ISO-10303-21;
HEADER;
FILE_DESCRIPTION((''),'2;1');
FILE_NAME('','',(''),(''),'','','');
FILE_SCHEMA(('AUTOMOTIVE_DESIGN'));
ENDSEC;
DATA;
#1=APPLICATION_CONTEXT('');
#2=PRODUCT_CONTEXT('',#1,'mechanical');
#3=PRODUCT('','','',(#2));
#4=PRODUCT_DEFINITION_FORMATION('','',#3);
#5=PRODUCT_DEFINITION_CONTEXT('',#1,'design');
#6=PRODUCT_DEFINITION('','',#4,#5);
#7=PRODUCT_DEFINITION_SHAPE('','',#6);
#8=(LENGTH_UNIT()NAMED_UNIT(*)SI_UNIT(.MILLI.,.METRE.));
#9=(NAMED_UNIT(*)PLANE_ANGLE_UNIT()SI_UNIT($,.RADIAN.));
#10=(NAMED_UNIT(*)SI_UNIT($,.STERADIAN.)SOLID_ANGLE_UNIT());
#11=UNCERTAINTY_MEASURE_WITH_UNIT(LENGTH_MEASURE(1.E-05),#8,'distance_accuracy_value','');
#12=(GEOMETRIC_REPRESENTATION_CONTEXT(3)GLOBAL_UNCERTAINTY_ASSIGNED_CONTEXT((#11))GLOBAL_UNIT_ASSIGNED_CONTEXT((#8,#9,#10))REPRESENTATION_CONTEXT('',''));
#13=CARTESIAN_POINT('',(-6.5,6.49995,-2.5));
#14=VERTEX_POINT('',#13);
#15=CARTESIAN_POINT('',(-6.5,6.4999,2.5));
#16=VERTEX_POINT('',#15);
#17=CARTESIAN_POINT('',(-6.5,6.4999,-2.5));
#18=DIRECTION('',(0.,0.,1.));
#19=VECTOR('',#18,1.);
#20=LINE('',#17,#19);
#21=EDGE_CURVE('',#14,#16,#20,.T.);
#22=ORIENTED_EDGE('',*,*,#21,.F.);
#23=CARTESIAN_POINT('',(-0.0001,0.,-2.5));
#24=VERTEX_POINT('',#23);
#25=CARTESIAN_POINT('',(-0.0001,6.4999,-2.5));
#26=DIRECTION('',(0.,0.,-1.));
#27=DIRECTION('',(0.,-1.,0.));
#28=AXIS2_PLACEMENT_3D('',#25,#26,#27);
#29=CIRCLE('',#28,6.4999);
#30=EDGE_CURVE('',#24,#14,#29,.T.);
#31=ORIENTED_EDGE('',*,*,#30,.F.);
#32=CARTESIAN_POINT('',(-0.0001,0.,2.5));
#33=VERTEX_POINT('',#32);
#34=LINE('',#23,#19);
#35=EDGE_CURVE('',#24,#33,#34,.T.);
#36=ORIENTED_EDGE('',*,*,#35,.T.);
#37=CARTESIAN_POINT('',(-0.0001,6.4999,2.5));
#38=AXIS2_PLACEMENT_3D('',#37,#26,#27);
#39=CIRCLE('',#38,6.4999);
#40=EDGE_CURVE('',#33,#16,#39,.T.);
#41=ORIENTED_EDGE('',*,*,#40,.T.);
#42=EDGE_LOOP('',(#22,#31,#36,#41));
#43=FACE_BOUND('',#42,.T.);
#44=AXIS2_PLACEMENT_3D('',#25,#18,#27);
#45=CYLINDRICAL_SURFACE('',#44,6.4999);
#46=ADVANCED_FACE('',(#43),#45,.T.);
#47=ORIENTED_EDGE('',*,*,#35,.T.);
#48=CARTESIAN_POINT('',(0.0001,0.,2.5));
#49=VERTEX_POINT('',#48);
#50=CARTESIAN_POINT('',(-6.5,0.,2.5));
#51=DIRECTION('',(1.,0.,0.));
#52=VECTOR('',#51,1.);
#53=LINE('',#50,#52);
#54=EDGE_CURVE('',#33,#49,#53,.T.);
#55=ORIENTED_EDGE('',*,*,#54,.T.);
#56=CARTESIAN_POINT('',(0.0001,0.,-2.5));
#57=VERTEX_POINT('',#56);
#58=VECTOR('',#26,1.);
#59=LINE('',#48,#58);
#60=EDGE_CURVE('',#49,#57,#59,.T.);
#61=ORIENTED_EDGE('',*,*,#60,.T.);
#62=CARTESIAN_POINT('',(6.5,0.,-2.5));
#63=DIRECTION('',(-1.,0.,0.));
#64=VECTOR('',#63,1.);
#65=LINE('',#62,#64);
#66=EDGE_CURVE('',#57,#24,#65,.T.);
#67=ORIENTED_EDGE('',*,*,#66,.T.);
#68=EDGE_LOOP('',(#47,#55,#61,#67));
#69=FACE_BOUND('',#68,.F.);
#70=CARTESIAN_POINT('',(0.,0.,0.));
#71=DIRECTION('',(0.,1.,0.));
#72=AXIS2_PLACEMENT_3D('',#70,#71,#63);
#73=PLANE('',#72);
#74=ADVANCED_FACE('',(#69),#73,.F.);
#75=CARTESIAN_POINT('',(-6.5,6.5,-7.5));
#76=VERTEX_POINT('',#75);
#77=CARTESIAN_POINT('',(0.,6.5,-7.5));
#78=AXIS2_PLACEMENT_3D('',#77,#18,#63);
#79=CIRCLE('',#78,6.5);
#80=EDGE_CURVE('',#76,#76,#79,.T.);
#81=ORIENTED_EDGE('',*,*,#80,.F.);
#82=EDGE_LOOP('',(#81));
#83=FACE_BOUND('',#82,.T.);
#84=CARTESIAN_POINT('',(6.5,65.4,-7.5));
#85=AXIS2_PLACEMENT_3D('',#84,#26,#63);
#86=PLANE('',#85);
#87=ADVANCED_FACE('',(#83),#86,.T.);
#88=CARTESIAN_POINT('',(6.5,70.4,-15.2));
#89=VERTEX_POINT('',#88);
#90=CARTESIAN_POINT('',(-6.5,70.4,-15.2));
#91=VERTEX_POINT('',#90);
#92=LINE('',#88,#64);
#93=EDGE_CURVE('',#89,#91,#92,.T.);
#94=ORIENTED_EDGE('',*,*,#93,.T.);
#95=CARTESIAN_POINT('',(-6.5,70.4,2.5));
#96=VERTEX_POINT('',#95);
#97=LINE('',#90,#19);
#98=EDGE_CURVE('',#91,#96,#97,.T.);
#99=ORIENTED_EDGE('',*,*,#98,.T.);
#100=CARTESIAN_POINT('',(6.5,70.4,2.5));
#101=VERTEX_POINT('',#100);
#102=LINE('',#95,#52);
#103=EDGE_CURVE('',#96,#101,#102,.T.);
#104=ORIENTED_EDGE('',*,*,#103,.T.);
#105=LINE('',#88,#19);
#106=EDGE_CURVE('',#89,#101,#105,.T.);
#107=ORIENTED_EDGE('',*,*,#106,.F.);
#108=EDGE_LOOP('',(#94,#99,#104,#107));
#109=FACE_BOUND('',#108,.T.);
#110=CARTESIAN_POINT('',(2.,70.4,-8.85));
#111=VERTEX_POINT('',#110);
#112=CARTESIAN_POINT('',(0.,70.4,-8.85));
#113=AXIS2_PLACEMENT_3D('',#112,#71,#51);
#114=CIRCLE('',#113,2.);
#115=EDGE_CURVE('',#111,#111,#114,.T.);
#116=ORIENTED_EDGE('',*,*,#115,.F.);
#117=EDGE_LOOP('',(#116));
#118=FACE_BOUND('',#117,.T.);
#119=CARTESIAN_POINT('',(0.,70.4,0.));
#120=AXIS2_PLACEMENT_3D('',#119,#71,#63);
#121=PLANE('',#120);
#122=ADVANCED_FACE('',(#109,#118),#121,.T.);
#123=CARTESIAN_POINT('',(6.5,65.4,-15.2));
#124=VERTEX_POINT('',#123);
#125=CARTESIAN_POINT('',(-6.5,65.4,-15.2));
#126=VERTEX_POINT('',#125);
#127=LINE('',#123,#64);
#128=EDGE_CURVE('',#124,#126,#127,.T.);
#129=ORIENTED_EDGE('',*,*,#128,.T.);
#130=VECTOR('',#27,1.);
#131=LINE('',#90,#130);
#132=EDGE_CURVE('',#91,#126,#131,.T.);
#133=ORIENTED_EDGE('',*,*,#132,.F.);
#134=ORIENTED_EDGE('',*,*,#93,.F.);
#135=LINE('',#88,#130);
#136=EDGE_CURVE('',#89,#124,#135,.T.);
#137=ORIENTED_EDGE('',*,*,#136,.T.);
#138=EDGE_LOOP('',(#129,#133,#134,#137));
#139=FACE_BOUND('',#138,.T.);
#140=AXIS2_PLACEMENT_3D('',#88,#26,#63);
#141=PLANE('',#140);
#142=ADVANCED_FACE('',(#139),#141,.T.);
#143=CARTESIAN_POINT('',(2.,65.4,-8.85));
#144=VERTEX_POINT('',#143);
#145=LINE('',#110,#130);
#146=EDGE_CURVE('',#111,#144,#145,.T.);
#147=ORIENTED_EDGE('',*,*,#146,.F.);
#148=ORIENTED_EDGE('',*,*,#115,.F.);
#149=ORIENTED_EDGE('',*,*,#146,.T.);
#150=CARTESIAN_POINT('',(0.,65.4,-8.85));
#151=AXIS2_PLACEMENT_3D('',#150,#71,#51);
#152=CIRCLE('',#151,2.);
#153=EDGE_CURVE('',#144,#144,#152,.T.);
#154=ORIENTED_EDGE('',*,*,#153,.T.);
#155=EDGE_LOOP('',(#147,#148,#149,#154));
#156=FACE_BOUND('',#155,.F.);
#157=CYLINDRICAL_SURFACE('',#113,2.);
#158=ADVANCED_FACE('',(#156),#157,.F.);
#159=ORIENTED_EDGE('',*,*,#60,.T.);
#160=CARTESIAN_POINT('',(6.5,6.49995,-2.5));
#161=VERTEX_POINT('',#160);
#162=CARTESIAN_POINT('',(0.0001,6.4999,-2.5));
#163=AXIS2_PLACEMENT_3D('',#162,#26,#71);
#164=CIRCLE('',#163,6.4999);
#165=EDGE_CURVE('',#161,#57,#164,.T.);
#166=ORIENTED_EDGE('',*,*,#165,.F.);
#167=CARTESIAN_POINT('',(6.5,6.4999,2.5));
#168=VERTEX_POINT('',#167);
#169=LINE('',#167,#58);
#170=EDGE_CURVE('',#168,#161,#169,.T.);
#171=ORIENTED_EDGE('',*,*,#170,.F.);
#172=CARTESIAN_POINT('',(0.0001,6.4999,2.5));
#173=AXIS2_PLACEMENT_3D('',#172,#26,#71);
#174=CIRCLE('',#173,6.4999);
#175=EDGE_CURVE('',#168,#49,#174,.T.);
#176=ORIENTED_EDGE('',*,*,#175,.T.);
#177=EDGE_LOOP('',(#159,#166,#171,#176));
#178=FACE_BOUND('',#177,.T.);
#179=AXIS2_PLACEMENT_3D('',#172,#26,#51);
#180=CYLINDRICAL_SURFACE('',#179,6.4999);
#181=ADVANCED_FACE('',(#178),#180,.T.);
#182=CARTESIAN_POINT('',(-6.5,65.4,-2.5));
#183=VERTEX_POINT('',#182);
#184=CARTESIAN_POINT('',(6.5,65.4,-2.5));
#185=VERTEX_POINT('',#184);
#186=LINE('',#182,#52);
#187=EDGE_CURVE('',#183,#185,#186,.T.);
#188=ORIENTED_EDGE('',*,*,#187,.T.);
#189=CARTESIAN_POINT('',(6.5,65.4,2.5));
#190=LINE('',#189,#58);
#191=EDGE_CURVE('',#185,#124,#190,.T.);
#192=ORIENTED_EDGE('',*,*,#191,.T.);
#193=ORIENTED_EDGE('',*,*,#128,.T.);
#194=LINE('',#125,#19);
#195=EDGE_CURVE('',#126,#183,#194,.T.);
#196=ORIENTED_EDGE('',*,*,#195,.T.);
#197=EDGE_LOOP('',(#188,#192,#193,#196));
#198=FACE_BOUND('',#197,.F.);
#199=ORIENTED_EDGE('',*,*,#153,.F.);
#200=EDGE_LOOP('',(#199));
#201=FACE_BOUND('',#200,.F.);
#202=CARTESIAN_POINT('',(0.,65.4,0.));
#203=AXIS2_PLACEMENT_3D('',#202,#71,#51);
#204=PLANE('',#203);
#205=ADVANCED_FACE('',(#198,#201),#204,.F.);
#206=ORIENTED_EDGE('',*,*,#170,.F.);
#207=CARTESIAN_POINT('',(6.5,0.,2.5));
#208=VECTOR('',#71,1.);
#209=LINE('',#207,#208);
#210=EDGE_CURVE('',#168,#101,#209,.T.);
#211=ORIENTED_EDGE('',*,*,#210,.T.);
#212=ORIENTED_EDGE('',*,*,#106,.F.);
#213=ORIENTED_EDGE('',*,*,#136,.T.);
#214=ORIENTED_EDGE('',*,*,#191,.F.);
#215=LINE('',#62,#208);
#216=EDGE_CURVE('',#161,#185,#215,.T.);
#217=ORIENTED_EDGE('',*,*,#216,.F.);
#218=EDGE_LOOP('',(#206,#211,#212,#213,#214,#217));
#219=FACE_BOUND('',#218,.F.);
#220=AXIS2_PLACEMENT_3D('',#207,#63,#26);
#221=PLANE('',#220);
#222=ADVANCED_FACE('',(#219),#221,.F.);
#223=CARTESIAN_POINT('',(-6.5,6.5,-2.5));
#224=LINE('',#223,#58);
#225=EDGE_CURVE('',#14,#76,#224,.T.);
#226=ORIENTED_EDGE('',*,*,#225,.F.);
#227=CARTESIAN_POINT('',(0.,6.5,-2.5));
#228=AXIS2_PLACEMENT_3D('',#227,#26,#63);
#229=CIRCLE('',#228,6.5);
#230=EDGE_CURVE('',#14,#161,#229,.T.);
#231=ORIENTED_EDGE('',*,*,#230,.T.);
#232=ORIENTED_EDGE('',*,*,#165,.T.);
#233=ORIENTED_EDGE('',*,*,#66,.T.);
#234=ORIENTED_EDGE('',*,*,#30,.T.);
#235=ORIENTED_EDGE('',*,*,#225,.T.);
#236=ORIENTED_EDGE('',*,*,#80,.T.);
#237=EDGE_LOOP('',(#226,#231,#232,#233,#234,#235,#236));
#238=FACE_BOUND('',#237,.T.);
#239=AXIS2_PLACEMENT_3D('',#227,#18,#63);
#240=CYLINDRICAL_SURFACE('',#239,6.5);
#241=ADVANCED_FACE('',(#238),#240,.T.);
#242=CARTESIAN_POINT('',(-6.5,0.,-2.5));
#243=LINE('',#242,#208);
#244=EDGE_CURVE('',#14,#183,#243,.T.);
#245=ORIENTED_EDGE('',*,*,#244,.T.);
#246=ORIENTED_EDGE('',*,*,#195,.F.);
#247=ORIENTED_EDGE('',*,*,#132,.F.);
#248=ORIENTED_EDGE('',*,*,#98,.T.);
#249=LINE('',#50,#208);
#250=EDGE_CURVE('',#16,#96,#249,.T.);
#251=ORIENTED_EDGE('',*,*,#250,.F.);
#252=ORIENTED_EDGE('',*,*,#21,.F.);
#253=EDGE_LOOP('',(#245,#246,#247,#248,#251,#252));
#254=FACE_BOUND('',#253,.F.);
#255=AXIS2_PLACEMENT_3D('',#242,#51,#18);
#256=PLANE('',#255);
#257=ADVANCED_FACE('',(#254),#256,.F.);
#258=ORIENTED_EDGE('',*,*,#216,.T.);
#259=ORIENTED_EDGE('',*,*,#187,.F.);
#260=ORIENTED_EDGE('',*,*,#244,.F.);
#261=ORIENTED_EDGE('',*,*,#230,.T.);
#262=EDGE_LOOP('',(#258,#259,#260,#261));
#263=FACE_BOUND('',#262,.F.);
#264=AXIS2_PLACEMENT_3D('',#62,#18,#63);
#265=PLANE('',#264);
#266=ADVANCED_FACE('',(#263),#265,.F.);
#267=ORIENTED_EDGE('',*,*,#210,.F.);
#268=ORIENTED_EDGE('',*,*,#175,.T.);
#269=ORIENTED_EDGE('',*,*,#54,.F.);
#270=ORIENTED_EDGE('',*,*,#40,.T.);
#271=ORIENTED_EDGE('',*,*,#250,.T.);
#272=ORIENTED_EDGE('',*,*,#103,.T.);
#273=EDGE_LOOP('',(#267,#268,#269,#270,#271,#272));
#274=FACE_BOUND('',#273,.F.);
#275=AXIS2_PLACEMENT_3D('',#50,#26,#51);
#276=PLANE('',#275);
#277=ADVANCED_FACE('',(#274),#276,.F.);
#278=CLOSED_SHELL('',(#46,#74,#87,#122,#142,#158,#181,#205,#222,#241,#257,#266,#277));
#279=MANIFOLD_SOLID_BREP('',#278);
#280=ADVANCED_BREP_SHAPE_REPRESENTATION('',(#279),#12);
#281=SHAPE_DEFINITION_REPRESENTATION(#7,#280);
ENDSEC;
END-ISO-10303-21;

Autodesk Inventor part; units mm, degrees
ref_plane "YZ Plane" through (0, 0, 0) normal (1, 0, 0) x (0, 1, 0)
ref_plane "XZ Plane" through (0, 0, 0) normal (0, 1, 0) x (-1, 0, 0)
ref_plane "XY Plane" through (0, 0, 0) normal (0, 0, 1) x (1, 0, 0)
sketch "Sketch1" plane through (0, 0, 0) normal (0, 1, 0) x (-1, 0, 0)
  line L0 (-6.5, -2.5) -> (6.5, -2.5)
  line L1 (6.5, -2.5) -> (6.5, 2.5)
  line L2 (6.5, 2.5) -> (-6.5, 2.5)
  line L3 (-6.5, 2.5) -> (-6.5, -2.5)
  line L4 (-6.5, -2.5) -> (6.5, 2.5) construction
  line L5 (6.5, -2.5) -> (-6.5, 2.5) construction
  point P0 (0, 0)
  dimension "d0" = 13
  dimension "d1" = 5
extrude "Extrusion1" add sketch "Sketch1" along normal blind 70.4
sketch "Sketch2" plane through (0, 70.4, 0) normal (0, 1, 0) x (1, 0, 0)
  line L0 (6.5, 2.5) -> (6.5, -2.5) projected
  line L1 (6.5, -2.5) -> (-6.5, -2.5) projected
  line L2 (-6.5, -2.5) -> (-6.5, 2.5) projected
  line L3 (-6.5, 2.5) -> (6.5, 2.5) projected
  line L4 (-6.5, -2.5) -> (6.5, -2.5)
  line L5 (6.5, -2.5) -> (6.5, 15.2)
  line L6 (6.5, 15.2) -> (-6.5, 15.2)
  line L7 (-6.5, 15.2) -> (-6.5, -2.5)
  point P0 (0, 0)
  dimension "d4" = 17.7
extrude "Extrusion2" add sketch "Sketch2" against normal blind 5 contours L3 L7 L6 L5
fillet "Fillet1" radius 6.5 2 edges at (6.5, 0, 0) (-6.5, 0, 0)
sketch "Sketch3" plane through (6.5, 65.4, -2.5) normal (0, 0, -1) x (-1, 0, 0)
  arc A0 (0, -58.9) -> (13, -58.9) centre (6.5, -58.9) ccw projected
  line L0 (0, -58.9) -> (0, 0) projected
  line L1 (0, 0) -> (0, 5) projected
  line L2 (0, 5) -> (13, 5) projected
  line L3 (13, 5) -> (13, 0) projected
  line L4 (13, 0) -> (13, -58.9) projected
  line L5 (13, 0) -> (0, 0) projected
  circle A1 centre (6.5, -58.9) radius 6.5
  point P0 (6.5, -65.4)
extrude "Extrusion3" add sketch "Sketch3" along normal blind 5 contours A1 A0
sketch "Sketch4" plane through (0, 70.4, 0) normal (0, 1, 0) x (1, 0, 0)
  line L0 (6.5, -2.5) -> (-6.5, -2.5) projected
  line L1 (-6.5, -2.5) -> (-6.5, 15.2) projected
  line L2 (-6.5, 15.2) -> (6.5, 15.2) projected
  line L3 (6.5, 15.2) -> (6.5, -2.5) projected
  line L4 (6.5, -2.5) -> (-6.5, -2.5) projected
  line L5 (-6.5, -2.5) -> (-6.5, 15.2) projected
  line L6 (-6.5, 15.2) -> (6.5, 15.2) projected
  line L7 (6.5, 15.2) -> (6.5, -2.5) projected
  line L8 (-6.5, 2.5) -> (6.5, 2.5) projected
  circle A0 centre (0, 8.85) radius 2
  point P0 (0, 0)
  dimension "d10" = 4
  dimension "d11" = 6.35
  dimension "d12" = 6.5
extrude "Extrusion4" cut sketch "Sketch4" against normal up to surface (5 mm away) contours A0
properties part number "terminal_mount_front"
